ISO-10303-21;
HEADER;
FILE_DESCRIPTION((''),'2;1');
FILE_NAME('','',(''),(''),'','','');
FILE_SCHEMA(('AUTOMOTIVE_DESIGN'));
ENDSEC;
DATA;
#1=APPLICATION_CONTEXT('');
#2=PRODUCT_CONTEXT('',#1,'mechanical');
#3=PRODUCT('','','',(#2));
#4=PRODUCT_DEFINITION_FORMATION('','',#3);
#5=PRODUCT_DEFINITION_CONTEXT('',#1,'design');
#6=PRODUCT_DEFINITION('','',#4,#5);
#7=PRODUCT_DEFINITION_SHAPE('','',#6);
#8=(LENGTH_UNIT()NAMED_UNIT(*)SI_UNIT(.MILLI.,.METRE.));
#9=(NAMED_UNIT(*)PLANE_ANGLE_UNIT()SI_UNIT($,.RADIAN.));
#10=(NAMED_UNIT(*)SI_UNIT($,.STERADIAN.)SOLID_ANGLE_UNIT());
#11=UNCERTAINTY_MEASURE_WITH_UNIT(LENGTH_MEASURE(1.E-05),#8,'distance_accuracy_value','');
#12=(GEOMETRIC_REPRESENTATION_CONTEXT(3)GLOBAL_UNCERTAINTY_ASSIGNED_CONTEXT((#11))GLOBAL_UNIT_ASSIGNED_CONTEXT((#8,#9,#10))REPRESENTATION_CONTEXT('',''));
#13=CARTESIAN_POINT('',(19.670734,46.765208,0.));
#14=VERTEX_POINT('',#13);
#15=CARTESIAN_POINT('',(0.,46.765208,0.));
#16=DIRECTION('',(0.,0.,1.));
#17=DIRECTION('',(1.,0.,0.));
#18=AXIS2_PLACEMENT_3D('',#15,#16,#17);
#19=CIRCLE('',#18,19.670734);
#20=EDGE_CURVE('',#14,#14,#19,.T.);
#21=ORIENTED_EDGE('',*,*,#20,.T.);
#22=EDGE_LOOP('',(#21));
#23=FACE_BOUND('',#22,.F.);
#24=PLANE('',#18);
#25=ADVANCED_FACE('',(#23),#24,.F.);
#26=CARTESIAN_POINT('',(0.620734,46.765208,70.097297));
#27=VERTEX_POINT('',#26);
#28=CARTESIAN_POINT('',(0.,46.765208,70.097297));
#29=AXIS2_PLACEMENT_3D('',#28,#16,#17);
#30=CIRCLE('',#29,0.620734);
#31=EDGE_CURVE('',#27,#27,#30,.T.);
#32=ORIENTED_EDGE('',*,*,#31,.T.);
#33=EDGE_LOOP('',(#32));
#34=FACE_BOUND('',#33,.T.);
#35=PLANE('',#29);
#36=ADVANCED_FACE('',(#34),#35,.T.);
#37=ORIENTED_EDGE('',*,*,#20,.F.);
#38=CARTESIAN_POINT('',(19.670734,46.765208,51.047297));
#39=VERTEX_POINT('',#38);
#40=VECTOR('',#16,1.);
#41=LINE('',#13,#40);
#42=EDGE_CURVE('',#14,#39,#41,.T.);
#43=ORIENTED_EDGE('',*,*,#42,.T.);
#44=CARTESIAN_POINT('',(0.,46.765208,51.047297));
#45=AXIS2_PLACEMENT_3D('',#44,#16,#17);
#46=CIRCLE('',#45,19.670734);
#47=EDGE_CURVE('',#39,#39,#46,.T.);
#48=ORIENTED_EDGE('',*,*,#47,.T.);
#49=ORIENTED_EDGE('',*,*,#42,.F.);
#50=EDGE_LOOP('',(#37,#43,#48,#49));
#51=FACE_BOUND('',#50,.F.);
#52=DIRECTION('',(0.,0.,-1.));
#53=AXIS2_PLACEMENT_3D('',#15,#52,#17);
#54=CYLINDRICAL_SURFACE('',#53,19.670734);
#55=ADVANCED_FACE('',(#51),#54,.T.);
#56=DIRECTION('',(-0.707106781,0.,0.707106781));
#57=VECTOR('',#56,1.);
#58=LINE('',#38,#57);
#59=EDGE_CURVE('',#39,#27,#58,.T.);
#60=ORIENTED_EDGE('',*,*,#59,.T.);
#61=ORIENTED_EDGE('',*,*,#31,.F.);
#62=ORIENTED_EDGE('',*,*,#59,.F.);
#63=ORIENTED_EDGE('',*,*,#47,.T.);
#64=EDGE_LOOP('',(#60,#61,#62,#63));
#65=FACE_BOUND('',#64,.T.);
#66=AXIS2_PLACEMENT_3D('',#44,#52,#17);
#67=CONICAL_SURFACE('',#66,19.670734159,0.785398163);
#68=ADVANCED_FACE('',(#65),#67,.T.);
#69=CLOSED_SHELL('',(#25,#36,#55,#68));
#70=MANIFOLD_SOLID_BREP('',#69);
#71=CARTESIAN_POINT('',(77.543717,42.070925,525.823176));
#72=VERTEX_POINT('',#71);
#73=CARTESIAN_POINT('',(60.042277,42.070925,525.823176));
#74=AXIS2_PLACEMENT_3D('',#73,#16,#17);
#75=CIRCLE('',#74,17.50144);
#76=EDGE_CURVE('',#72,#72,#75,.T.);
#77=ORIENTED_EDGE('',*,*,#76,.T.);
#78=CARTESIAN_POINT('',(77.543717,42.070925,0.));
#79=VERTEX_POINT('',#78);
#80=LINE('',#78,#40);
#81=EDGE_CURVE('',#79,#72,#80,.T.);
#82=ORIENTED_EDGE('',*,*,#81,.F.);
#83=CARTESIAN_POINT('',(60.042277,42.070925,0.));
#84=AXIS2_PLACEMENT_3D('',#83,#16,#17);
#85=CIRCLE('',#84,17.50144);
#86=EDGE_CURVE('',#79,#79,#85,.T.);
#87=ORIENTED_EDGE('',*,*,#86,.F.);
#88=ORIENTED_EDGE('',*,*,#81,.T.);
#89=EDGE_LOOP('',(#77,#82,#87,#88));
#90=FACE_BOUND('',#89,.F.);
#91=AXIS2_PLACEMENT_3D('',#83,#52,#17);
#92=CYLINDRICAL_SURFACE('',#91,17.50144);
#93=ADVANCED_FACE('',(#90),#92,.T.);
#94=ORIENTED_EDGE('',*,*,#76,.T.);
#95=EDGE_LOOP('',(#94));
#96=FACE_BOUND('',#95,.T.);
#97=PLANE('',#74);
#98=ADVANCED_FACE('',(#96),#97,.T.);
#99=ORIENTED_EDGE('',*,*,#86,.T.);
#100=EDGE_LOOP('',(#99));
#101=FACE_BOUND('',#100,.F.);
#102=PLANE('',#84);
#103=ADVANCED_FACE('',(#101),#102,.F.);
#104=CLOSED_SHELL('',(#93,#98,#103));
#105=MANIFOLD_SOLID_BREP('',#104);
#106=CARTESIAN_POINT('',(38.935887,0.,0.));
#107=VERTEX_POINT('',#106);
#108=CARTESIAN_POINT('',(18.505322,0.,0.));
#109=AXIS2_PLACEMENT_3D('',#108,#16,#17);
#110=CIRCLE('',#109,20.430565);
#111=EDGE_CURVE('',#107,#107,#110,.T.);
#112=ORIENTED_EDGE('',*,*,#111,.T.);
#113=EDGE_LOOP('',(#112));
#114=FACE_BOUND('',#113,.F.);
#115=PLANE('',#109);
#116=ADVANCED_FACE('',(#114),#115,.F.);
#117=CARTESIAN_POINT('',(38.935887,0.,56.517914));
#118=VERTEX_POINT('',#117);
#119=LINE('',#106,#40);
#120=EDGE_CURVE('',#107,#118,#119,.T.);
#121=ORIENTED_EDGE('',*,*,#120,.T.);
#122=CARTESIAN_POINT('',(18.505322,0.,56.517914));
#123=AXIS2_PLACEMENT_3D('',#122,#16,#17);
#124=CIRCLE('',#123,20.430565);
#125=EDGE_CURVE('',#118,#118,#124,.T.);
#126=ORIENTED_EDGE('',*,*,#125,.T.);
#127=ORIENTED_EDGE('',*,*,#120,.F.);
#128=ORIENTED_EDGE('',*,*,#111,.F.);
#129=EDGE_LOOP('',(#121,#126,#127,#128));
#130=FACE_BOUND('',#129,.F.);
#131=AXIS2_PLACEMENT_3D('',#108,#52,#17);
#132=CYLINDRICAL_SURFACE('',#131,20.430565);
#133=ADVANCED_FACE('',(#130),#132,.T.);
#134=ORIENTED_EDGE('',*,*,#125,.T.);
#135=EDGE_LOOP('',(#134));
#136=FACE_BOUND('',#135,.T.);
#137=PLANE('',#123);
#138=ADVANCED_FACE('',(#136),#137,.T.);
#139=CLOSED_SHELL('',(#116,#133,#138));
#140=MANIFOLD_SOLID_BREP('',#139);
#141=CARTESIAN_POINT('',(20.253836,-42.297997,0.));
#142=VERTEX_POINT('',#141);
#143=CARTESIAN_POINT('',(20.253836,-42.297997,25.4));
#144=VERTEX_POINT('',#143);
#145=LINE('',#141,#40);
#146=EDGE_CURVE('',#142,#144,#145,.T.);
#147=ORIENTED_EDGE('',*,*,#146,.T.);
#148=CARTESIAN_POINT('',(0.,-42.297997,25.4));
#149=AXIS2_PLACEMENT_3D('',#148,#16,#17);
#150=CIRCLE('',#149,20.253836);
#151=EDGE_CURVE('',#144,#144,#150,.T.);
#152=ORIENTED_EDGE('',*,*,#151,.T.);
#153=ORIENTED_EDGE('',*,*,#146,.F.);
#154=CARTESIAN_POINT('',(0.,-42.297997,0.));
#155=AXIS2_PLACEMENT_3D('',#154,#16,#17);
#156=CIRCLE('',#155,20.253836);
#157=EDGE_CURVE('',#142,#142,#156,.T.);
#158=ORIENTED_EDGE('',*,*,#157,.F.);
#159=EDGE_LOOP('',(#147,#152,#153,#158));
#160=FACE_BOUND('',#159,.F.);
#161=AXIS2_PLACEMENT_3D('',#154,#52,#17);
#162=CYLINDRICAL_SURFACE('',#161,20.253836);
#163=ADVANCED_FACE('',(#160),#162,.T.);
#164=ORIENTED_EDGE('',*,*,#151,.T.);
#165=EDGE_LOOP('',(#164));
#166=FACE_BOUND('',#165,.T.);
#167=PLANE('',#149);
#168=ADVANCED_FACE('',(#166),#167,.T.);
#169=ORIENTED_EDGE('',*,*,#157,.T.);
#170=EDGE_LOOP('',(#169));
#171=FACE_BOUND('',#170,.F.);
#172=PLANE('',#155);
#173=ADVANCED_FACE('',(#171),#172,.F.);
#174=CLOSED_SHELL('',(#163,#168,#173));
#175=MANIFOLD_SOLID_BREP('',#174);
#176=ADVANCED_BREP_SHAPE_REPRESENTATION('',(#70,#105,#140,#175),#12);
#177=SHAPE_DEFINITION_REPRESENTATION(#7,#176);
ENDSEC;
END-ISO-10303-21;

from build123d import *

# Parameters (mm, degrees)
F0_R      = 20.43056521
F1_DEPTH  = 56.5179139376
F4_R      = 19.6707341592
F5_DEPTH  = 70.09729743
F6_SIZE   = 19.05
F7_R      = 20.2538361839
F8_DEPTH  = 25.4
F9_R      = 17.5014397404
F10_DEPTH = 525.8231759071


# Not quite as in the source:
# - the program builds the solid bodies; features that only make, move or delete a surface that nothing else refers to are left out


with BuildPart() as f1:
    # F0 (on Top) → F1 (new body)
    with BuildSketch(Plane.XY):
        with Locations((18.5053218156, 0)):
            Circle(F0_R)
    extrude(amount=F1_DEPTH)


with BuildPart() as f5:
    # F4 (on Top) → F5 (new body)
    with BuildSketch(Plane.XY):
        with Locations((0, 46.7652082443)):
            Circle(F4_R)
    extrude(amount=F5_DEPTH)

    # F6
    f6_edges = [f5.edges().sort_by_distance(p)[0] for p in [
        (-19.670734, 46.765208, 70.097297),
    ]]
    chamfer(f6_edges, length=F6_SIZE)


with BuildPart() as f8:
    # F7 (on Top) → F8 (new body)
    with BuildSketch(Plane.XY):
        with Locations((0, -42.2979965806)):
            Circle(F7_R)
    extrude(amount=F8_DEPTH)


with BuildPart() as f10:
    # F9 (on Top) → F10 (new body)
    with BuildSketch(Plane.XY):
        with Locations((60.0422769785, 42.0709252357)):
            Circle(F9_R)
    extrude(amount=F10_DEPTH)


solid = Compound([f1.part, f5.part, f8.part, f10.part])
